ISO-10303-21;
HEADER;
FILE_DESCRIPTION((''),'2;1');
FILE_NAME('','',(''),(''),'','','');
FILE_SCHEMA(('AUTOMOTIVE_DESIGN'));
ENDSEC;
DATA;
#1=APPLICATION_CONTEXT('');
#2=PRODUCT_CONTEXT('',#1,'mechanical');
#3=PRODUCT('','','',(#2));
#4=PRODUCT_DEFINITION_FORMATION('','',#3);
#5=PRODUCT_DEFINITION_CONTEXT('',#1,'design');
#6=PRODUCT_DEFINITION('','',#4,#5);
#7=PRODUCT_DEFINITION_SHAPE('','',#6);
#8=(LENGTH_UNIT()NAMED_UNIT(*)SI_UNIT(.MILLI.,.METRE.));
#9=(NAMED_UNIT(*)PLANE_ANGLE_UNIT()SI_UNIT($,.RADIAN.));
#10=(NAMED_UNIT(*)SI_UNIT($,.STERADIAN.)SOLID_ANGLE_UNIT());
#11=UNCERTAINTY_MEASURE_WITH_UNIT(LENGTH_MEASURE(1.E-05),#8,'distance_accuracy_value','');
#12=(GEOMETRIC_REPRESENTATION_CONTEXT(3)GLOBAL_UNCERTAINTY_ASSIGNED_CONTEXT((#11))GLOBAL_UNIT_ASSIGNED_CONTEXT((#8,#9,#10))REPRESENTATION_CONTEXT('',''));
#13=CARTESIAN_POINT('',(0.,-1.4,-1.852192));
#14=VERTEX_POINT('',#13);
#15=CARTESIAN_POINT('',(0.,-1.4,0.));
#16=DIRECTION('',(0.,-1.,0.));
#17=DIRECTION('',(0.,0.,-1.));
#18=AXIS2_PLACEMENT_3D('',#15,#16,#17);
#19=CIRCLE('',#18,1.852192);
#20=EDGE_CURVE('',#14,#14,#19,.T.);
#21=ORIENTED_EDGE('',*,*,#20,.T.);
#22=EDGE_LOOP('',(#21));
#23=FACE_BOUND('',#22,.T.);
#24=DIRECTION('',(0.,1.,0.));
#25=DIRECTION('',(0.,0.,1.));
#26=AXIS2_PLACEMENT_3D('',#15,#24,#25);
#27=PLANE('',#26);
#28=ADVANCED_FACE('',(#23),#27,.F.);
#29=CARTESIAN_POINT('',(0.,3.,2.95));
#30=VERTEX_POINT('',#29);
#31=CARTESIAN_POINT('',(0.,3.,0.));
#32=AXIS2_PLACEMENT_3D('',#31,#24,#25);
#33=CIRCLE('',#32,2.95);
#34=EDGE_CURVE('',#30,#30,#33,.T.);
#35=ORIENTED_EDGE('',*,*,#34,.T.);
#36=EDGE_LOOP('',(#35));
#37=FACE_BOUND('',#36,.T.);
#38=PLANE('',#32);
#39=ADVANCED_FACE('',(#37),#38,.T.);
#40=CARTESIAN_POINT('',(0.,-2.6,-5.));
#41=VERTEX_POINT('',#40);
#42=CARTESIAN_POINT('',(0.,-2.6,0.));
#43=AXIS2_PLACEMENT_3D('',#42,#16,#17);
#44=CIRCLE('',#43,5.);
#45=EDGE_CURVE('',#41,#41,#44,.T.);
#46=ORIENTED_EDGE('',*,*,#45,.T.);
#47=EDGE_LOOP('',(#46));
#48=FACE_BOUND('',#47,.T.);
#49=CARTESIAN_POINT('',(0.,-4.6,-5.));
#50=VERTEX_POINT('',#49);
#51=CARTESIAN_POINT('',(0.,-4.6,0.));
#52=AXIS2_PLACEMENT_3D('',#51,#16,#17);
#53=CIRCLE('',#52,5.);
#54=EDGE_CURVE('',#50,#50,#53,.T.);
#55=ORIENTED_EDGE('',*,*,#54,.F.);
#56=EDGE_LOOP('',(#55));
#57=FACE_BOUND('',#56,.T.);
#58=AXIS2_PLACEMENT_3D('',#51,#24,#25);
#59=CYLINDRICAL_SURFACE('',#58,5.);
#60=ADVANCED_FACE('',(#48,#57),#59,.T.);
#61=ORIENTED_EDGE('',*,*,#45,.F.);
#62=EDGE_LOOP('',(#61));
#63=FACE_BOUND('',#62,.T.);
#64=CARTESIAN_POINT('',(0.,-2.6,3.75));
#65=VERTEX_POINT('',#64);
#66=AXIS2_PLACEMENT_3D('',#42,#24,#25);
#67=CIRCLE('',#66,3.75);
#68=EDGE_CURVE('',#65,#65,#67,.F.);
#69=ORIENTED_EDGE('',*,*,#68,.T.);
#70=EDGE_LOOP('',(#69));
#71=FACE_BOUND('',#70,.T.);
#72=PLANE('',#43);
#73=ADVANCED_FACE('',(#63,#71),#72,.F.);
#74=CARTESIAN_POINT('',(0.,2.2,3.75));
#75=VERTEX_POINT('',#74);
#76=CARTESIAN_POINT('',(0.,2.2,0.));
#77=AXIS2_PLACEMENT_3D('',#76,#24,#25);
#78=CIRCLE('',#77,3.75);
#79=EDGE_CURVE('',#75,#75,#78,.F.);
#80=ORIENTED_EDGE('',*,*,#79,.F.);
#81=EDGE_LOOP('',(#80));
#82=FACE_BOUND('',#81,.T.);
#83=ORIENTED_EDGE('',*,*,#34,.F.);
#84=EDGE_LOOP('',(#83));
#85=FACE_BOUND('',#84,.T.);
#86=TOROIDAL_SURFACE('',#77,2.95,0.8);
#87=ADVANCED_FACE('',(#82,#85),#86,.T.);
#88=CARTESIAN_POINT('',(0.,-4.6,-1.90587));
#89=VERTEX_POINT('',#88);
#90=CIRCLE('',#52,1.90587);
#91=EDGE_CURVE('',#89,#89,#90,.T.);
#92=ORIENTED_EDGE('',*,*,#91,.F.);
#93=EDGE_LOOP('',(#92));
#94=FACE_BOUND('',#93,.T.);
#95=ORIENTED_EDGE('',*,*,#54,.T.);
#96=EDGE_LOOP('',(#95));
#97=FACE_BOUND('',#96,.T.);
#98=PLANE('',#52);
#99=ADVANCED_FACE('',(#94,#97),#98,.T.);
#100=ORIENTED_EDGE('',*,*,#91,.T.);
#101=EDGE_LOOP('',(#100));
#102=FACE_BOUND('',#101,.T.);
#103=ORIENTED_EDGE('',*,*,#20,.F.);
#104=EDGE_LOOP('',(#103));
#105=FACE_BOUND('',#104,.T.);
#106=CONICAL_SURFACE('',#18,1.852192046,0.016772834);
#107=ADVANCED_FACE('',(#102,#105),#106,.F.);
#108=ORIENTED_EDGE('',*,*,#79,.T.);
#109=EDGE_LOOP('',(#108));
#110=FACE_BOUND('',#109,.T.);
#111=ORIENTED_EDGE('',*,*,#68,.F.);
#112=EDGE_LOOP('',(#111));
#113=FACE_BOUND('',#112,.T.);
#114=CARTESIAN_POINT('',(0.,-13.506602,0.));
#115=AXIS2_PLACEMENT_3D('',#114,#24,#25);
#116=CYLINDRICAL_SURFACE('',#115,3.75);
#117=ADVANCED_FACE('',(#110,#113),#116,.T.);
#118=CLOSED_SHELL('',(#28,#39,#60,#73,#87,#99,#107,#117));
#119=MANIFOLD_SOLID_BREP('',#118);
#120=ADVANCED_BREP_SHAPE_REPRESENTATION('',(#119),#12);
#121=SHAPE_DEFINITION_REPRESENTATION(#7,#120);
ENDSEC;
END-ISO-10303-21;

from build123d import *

# Parameters (mm, degrees)
EXTRUDE_1_DEPTH      = 3
EXTRUDE_1_DEPTH_BACK = 2.6
SKETCH_1_R           = 3.75
SKETCH_2_R           = 5
EXTRUDE_2_DEPTH      = 2
FILLET_1_R           = 0.8
SKETCH_3_R           = 1.905870149
SKETCH_4_R           = 1.852192046


# Read off the part's stored shape, not the designer's step: Отступ5
with BuildPart() as part:
    # Эскиз1 → Бобышка-Вытянуть1 (new, two sides: drawn at the far end of the back side and taken through both)
    with BuildSketch(Plane(origin=(0, 0, 0), x_dir=(1, 0, 0), z_dir=(0, 1, 0)).offset(-EXTRUDE_1_DEPTH_BACK)):
        with Locations(Location((0, 0, 0), (0, 0, 270))):
            Circle(SKETCH_1_R)
    extrude(amount=EXTRUDE_1_DEPTH + EXTRUDE_1_DEPTH_BACK)

    # Эскиз2 → Бобышка-Вытянуть2 (add)
    with BuildSketch(Plane.XZ.offset(2.6)):
        with Locations(Location((0, 0, 0), (0, 0, 270))):
            Circle(SKETCH_2_R)
    extrude(amount=EXTRUDE_2_DEPTH)

    # Скругление1
    fillet_1_edges = [part.edges().sort_by_distance(p)[0] for p in [
        (0, 3, -3.75),
    ]]
    fillet(fillet_1_edges, radius=FILLET_1_R)

    # Отступ5 outline → Отступ5 (revolve, cut)
    with BuildSketch(Plane.XY):
        with BuildLine():
            Line((1.605870149, -4.6), (1.552192046, -1.524783544))
            ThreePointArc((1.552192046, -1.524783544), (1.514226865, -1.436417193), (1.425211389, -1.4))
            Line((1.425211389, -1.4), (0, -1.4))
            Line((0, -1.4), (0, -4.6))
            Line((0, -4.6), (1.605870149, -4.6))
        make_face()
    revolve(axis=Axis((0, 0, 0), (0, 1, 0)), mode=Mode.SUBTRACT)

    # Эскиз3 → Вырез-По сечениям1 section 0
    with BuildSketch(Plane.XZ.offset(4.6)):
        Circle(SKETCH_3_R)
    # Эскиз4 → Вырез-По сечениям1 section 1
    with BuildSketch(Plane.XZ.offset(1.4)):
        Circle(SKETCH_4_R)
    loft(mode=Mode.SUBTRACT)


solid = part.part
